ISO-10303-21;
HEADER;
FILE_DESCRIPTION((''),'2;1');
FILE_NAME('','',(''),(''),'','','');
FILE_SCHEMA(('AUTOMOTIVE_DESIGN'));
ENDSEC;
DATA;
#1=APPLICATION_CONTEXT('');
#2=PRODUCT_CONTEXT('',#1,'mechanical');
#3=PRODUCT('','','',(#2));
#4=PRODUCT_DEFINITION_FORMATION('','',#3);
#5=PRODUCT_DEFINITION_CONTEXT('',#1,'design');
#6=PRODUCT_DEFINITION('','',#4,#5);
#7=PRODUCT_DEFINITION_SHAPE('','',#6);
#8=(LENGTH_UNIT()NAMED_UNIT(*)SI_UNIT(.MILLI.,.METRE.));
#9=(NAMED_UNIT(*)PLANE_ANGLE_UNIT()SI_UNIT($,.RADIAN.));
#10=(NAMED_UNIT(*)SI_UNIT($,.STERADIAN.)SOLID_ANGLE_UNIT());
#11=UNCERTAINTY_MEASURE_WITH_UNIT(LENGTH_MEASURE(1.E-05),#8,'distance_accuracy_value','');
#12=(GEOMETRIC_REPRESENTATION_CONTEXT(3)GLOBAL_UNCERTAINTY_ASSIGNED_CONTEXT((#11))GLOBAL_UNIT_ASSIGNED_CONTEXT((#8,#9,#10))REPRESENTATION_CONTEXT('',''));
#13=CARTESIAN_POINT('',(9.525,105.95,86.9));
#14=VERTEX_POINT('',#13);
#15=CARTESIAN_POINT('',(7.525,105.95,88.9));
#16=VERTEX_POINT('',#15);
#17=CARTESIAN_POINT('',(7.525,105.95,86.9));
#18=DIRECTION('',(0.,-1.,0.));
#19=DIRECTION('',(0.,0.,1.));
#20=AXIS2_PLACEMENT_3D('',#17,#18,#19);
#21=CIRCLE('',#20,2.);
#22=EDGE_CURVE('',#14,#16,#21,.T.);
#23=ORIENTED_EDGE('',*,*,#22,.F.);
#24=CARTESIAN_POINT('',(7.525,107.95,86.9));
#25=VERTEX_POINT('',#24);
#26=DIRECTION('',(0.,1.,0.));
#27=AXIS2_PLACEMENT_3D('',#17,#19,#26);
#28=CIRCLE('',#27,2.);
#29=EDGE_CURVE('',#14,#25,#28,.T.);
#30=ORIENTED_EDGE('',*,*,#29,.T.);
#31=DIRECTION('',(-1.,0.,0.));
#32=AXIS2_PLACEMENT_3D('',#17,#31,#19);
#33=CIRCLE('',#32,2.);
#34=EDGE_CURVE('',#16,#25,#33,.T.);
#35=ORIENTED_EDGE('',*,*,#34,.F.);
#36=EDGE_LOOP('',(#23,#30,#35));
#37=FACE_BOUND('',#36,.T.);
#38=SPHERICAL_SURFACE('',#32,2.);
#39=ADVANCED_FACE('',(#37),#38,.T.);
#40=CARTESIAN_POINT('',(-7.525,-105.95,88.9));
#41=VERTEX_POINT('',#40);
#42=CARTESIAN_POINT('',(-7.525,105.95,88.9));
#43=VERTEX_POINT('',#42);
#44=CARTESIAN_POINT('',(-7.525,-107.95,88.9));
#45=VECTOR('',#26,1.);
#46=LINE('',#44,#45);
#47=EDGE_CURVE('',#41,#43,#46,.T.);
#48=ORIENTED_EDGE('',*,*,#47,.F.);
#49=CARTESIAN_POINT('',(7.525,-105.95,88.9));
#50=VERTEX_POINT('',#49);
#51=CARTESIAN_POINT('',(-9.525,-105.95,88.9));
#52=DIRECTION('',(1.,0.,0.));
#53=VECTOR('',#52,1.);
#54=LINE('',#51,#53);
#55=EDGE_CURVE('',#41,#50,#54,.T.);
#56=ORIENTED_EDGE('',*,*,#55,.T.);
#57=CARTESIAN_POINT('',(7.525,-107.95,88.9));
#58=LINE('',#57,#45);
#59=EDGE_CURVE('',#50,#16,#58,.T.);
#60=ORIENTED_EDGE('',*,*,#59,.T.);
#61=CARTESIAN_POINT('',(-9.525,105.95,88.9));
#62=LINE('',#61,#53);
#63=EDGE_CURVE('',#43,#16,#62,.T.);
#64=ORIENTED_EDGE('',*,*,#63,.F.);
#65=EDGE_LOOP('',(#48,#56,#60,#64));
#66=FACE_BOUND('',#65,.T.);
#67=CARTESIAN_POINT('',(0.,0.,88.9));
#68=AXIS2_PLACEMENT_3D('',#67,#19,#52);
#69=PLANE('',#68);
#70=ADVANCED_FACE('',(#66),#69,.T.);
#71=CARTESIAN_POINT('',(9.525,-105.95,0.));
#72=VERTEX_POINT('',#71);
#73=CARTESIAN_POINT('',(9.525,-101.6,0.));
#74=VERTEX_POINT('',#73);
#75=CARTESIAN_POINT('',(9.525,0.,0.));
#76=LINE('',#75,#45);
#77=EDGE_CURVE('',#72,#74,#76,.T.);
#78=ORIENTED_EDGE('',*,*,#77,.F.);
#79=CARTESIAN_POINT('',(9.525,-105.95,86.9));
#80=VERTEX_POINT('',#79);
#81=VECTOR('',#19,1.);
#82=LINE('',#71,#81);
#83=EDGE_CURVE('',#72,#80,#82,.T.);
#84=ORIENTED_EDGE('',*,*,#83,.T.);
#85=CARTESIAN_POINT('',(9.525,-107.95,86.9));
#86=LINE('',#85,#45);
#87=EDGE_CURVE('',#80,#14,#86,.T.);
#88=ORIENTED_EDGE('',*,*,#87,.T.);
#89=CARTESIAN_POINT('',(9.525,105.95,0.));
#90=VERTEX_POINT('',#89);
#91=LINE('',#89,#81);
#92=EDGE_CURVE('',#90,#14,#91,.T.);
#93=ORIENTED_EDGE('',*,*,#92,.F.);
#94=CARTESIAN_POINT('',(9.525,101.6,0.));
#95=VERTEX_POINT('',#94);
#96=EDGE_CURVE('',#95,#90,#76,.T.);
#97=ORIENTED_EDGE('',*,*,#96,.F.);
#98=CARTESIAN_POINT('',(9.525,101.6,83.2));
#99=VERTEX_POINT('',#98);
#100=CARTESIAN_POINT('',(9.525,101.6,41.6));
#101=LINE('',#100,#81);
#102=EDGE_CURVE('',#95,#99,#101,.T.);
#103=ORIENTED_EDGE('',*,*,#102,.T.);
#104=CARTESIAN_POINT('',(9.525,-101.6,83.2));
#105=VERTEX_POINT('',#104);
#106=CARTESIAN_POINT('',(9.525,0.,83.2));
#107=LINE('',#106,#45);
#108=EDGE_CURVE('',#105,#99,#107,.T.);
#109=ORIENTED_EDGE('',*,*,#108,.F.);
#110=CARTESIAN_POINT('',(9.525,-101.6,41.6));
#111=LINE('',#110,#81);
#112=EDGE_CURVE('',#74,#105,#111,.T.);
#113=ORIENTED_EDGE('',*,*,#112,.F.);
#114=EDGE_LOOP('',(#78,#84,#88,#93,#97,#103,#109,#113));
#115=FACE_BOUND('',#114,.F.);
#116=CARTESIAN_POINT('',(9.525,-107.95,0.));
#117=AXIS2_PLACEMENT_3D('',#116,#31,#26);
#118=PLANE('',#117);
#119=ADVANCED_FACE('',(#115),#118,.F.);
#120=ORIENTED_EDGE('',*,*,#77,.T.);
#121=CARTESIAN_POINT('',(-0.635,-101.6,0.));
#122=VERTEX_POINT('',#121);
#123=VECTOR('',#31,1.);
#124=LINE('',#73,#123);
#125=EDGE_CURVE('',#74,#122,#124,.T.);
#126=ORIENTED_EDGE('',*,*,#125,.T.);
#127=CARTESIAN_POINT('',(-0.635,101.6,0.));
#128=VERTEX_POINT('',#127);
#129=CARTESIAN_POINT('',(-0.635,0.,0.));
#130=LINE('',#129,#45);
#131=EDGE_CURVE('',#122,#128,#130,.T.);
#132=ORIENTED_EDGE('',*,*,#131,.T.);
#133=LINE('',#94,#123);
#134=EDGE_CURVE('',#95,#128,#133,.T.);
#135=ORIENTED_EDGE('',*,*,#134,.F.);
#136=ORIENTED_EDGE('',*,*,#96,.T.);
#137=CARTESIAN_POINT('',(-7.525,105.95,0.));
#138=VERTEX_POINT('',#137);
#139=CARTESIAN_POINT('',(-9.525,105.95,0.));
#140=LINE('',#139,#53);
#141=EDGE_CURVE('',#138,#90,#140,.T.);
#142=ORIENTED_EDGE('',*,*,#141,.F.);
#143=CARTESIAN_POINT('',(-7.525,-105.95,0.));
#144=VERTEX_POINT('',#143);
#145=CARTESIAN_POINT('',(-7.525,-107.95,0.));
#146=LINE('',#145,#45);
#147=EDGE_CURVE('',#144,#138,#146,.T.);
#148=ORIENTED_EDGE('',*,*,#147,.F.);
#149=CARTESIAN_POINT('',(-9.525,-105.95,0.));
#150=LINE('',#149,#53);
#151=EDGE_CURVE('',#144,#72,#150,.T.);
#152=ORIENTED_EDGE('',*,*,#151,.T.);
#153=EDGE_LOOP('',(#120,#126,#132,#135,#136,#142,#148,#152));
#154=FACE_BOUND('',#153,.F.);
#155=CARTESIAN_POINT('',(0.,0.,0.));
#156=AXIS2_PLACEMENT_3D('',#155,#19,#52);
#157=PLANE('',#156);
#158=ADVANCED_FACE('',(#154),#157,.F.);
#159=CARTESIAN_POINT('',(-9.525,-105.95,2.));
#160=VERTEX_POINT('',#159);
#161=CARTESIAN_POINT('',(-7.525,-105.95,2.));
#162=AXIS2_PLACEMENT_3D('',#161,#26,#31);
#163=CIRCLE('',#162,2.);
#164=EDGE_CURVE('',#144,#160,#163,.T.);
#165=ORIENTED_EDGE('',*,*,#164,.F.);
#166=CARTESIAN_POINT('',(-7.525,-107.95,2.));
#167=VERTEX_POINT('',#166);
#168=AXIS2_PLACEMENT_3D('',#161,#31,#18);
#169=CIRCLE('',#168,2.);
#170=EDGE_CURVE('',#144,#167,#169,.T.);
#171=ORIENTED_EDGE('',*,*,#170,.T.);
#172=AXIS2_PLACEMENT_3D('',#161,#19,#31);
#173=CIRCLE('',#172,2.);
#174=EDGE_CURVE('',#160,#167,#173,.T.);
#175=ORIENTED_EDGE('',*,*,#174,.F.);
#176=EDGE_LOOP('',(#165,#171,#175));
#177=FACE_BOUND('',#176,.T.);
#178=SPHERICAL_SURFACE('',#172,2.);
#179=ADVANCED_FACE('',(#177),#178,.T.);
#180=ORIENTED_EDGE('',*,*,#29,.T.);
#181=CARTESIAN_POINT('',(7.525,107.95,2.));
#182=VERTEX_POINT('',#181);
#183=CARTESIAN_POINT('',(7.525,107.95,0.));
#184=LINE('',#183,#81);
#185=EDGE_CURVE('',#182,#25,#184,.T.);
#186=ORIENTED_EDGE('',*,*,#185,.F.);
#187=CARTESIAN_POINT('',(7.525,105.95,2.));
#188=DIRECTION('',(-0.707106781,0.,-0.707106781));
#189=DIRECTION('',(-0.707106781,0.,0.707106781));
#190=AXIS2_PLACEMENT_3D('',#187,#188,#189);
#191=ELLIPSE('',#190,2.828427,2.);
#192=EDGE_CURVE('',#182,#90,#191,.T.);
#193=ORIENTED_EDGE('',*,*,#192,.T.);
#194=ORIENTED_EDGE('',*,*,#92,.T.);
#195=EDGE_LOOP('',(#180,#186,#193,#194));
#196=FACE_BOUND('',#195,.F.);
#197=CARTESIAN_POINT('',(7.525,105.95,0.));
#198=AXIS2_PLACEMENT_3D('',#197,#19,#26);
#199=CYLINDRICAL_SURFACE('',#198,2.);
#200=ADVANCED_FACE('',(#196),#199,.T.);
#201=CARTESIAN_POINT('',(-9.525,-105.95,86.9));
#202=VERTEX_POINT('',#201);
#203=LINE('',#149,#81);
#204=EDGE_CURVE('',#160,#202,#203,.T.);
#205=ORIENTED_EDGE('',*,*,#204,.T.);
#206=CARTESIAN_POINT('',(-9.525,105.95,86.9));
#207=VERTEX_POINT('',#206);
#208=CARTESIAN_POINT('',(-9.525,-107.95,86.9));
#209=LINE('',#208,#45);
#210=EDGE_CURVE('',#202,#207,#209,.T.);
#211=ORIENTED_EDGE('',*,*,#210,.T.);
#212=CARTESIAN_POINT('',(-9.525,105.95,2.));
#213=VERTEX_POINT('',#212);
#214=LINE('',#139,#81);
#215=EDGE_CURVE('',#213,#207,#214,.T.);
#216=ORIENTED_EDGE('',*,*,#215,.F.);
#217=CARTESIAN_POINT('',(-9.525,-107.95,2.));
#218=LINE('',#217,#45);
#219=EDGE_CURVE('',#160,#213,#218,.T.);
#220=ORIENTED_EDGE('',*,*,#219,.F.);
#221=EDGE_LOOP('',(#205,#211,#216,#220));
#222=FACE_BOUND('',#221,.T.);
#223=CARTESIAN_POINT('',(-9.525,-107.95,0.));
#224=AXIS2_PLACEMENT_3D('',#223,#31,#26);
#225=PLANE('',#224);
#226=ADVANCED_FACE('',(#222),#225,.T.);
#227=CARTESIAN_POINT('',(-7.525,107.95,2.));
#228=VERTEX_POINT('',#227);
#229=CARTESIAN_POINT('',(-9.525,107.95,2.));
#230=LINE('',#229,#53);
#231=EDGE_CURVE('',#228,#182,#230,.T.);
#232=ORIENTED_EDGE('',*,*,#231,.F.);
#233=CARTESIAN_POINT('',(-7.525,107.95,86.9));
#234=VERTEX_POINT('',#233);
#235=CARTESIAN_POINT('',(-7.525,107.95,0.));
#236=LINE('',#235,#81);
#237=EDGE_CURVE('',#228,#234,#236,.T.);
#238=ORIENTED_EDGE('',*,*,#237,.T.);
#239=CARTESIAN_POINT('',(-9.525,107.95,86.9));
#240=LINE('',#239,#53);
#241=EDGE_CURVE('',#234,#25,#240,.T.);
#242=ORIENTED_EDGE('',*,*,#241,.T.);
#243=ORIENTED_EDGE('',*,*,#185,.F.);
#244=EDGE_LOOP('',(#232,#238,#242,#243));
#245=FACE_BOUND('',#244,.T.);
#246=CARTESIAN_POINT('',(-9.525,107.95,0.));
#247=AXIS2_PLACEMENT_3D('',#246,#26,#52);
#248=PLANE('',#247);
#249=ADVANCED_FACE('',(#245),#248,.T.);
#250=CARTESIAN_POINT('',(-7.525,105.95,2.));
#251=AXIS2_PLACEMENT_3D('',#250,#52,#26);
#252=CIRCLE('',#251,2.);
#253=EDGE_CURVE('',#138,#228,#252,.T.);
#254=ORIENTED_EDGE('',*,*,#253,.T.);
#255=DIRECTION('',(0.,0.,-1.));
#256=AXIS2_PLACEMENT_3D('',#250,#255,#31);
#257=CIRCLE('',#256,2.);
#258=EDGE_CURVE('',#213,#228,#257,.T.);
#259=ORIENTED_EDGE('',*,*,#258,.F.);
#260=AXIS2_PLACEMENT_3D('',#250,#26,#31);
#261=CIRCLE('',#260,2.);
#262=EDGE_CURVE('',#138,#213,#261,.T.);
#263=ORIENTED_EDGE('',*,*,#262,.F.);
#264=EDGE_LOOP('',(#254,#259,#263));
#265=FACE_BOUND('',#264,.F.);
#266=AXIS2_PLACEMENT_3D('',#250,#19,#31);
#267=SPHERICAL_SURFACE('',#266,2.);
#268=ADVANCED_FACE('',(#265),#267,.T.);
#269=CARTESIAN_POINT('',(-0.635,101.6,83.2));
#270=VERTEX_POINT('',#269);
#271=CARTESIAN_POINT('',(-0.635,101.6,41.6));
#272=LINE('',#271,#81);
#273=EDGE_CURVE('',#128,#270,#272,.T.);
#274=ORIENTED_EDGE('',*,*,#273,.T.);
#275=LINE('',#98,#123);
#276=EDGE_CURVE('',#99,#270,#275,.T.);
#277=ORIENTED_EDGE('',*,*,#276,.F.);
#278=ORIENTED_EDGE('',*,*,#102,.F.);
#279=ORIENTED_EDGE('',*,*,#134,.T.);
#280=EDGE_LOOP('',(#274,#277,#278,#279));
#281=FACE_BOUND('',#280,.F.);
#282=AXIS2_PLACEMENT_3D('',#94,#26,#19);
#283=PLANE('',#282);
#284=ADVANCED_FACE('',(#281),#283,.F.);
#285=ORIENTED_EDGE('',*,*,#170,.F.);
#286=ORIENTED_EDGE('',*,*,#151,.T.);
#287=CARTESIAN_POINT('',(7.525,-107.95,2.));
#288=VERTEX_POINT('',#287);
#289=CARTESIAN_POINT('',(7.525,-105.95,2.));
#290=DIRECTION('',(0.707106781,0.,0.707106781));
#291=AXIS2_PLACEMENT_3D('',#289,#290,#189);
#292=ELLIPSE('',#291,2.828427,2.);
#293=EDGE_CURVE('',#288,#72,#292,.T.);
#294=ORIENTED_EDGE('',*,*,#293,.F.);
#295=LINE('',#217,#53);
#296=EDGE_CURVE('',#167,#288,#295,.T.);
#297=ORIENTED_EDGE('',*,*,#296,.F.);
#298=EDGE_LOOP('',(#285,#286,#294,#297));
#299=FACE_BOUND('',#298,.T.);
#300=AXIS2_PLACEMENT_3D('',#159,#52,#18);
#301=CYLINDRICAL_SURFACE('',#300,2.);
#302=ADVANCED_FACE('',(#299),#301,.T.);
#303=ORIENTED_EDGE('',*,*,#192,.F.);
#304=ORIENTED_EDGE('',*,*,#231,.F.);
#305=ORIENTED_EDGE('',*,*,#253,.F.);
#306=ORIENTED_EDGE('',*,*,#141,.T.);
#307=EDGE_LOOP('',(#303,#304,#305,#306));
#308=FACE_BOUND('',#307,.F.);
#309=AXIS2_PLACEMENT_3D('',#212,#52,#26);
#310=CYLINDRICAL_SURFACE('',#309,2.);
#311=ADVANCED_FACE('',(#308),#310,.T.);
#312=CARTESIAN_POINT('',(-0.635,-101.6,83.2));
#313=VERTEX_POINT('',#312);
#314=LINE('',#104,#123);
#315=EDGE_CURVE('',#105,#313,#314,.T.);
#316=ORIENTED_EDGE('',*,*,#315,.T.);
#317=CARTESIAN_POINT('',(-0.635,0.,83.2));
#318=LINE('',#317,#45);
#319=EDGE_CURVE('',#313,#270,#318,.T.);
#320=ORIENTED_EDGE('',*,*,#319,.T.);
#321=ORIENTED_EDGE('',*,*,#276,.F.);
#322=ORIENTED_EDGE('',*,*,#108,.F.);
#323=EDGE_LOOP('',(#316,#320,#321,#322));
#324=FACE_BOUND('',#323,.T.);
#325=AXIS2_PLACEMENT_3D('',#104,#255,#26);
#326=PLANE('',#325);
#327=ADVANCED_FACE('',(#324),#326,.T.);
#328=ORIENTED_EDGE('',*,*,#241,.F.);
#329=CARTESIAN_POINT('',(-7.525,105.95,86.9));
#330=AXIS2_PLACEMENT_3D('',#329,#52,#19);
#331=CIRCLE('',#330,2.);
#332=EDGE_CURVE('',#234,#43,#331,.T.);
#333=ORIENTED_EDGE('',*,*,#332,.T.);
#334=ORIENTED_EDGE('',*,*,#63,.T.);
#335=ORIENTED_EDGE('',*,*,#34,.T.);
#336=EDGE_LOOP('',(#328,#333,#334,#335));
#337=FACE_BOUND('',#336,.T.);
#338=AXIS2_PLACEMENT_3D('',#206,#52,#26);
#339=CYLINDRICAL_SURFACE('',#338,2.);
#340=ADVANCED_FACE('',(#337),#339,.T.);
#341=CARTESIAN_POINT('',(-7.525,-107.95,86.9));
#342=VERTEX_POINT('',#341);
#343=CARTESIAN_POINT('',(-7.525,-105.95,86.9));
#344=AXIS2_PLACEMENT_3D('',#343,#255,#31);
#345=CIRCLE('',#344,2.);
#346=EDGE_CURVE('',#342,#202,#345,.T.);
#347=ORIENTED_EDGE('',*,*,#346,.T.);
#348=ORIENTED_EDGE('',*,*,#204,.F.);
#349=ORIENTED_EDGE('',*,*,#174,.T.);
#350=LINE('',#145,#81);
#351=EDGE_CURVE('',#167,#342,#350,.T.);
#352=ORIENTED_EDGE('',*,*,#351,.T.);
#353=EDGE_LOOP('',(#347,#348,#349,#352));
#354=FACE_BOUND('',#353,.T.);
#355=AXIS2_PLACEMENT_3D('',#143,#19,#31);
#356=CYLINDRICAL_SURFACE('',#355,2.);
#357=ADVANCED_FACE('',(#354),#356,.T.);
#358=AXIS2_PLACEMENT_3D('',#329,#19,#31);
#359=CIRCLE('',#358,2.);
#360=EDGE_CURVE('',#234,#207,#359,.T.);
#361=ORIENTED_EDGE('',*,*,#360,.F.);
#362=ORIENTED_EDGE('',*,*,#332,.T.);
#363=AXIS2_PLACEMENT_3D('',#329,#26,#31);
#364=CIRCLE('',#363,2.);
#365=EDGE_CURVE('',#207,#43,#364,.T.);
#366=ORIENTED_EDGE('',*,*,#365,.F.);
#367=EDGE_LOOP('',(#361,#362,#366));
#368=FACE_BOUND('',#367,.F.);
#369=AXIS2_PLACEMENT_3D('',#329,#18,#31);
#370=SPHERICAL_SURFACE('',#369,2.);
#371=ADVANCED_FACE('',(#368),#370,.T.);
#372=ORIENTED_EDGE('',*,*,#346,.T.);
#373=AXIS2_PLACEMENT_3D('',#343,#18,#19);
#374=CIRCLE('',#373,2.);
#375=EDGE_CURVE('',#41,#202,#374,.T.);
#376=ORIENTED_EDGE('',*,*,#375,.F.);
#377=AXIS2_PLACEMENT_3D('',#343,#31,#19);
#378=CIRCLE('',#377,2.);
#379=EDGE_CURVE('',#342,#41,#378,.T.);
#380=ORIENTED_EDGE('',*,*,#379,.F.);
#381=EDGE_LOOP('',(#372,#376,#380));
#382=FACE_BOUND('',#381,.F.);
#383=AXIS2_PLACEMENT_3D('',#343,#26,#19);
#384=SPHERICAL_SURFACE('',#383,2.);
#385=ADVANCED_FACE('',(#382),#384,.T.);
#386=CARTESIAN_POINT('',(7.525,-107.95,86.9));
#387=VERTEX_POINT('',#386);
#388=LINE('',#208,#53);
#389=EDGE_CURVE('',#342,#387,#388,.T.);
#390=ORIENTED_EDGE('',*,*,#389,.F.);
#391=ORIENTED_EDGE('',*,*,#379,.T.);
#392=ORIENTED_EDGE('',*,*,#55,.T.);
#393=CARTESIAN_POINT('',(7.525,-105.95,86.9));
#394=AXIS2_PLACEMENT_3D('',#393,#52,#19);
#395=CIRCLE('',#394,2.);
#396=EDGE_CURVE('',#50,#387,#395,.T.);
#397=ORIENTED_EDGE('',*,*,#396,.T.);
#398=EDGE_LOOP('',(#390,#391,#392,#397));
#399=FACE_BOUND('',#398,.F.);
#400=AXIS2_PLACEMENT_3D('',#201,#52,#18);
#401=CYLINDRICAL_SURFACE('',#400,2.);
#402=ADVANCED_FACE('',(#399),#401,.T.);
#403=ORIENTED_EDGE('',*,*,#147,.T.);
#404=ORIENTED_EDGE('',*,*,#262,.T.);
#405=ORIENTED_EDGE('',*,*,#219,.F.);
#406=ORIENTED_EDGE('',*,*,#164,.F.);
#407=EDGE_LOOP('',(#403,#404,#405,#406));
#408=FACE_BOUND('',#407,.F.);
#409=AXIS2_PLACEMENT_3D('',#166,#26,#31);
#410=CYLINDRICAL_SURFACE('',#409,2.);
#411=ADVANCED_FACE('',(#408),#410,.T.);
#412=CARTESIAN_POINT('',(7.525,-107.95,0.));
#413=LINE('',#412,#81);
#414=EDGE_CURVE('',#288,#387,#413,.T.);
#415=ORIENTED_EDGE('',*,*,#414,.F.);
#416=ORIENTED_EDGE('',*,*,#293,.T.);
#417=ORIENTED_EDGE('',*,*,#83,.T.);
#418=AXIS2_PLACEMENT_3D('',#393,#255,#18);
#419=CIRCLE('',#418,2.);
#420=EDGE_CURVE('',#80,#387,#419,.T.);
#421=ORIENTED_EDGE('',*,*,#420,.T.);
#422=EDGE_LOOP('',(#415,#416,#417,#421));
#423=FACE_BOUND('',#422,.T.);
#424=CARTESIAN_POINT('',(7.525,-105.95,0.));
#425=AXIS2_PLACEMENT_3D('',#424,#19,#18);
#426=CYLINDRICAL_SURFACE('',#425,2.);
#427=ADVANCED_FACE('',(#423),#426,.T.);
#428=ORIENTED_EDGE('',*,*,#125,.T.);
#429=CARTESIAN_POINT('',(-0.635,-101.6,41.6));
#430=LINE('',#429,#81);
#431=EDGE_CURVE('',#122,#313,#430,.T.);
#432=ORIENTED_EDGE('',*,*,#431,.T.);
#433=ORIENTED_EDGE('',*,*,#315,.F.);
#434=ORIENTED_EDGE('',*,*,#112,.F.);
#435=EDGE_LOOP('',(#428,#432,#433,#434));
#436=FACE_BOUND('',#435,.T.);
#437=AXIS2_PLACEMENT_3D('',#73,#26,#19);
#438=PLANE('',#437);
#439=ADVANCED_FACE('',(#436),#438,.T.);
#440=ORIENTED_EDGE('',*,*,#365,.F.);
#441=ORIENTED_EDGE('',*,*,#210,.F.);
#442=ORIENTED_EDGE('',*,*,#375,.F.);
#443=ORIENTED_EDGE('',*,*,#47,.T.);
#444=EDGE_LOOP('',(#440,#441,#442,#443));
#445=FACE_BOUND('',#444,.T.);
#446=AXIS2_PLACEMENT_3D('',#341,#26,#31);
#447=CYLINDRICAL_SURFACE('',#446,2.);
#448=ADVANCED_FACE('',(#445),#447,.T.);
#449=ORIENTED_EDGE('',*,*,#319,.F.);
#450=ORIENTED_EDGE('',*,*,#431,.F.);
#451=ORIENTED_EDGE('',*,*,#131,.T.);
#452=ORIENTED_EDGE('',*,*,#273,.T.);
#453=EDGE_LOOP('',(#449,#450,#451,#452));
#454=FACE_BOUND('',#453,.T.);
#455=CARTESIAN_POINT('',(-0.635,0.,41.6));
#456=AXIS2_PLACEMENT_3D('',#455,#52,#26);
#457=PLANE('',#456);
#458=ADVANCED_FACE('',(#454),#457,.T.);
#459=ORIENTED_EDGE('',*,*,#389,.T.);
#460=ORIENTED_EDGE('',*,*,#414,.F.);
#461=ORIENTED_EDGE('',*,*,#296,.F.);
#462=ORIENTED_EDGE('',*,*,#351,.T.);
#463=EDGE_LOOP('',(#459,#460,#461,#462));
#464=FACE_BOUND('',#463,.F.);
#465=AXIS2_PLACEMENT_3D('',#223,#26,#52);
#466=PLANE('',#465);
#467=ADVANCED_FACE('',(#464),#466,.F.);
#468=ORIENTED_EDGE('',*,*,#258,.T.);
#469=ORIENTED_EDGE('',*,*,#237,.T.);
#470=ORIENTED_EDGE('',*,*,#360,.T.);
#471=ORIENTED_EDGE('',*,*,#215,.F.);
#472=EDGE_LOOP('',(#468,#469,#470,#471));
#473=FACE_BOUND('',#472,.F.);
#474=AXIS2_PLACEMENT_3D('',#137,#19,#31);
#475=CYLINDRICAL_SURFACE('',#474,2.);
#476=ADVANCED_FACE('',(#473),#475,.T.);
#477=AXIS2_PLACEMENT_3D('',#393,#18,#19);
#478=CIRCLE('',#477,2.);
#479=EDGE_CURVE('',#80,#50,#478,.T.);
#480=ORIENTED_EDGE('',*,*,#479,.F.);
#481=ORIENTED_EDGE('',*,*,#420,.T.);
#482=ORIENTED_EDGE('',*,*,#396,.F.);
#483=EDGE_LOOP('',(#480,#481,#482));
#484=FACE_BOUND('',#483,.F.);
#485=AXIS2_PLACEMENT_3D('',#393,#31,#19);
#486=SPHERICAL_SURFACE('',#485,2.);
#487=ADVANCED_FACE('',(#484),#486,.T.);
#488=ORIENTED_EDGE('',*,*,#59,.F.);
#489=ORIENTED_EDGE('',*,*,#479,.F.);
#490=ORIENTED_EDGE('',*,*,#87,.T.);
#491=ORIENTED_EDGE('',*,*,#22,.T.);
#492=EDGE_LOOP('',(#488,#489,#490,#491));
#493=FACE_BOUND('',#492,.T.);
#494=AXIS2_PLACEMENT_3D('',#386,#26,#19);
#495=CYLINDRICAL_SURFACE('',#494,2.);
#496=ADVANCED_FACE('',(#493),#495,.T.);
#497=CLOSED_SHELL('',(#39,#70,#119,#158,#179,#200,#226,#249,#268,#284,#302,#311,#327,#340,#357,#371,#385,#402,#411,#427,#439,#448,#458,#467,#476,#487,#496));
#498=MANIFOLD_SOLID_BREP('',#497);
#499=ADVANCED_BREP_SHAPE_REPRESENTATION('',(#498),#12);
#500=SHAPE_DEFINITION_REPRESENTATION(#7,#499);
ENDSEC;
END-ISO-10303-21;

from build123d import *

# Parameters (mm, degrees)
F0_W     = 19.05
F0_H     = 215.9
F1_DEPTH = 88.9
F2_W     = 203.2
F2_H     = 83.2
F3_DEPTH = 10.16
F4_R     = 2


# Not quite as in the source:
# - a feature names something its author has since deleted; it is built from what else it names


with BuildPart() as f1:
    # F0 (on Top) → F1 (new body)
    with BuildSketch(Plane.XY):
        Rectangle(F0_W, F0_H)
    extrude(amount=F1_DEPTH)

    # F2 (on face) → F3 (cut)
    with BuildSketch(Plane.YZ.offset(9.525)):
        with Locations((0, 41.6)):
            Rectangle(F2_W, F2_H)
    extrude(amount=-F3_DEPTH, mode=Mode.SUBTRACT)

    # F4
    f4_edges = [f1.edges().sort_by_distance(p)[0] for p in [
        (-9.525, 0, 88.9),
        (0, -107.95, 88.9),
        (-9.525, -107.95, 44.45),
        (-9.525, 107.95, 44.45),
        (0, 107.95, 88.9),
        (9.525, 0, 88.9),
        (9.525, -107.95, 44.45),
        (9.525, 107.95, 44.45),
        (-9.525, 0, 0),
        (0, 107.95, 0),
        (0, -107.95, 0),
    ]]
    fillet(f4_edges, radius=F4_R)


solid = f1.part
